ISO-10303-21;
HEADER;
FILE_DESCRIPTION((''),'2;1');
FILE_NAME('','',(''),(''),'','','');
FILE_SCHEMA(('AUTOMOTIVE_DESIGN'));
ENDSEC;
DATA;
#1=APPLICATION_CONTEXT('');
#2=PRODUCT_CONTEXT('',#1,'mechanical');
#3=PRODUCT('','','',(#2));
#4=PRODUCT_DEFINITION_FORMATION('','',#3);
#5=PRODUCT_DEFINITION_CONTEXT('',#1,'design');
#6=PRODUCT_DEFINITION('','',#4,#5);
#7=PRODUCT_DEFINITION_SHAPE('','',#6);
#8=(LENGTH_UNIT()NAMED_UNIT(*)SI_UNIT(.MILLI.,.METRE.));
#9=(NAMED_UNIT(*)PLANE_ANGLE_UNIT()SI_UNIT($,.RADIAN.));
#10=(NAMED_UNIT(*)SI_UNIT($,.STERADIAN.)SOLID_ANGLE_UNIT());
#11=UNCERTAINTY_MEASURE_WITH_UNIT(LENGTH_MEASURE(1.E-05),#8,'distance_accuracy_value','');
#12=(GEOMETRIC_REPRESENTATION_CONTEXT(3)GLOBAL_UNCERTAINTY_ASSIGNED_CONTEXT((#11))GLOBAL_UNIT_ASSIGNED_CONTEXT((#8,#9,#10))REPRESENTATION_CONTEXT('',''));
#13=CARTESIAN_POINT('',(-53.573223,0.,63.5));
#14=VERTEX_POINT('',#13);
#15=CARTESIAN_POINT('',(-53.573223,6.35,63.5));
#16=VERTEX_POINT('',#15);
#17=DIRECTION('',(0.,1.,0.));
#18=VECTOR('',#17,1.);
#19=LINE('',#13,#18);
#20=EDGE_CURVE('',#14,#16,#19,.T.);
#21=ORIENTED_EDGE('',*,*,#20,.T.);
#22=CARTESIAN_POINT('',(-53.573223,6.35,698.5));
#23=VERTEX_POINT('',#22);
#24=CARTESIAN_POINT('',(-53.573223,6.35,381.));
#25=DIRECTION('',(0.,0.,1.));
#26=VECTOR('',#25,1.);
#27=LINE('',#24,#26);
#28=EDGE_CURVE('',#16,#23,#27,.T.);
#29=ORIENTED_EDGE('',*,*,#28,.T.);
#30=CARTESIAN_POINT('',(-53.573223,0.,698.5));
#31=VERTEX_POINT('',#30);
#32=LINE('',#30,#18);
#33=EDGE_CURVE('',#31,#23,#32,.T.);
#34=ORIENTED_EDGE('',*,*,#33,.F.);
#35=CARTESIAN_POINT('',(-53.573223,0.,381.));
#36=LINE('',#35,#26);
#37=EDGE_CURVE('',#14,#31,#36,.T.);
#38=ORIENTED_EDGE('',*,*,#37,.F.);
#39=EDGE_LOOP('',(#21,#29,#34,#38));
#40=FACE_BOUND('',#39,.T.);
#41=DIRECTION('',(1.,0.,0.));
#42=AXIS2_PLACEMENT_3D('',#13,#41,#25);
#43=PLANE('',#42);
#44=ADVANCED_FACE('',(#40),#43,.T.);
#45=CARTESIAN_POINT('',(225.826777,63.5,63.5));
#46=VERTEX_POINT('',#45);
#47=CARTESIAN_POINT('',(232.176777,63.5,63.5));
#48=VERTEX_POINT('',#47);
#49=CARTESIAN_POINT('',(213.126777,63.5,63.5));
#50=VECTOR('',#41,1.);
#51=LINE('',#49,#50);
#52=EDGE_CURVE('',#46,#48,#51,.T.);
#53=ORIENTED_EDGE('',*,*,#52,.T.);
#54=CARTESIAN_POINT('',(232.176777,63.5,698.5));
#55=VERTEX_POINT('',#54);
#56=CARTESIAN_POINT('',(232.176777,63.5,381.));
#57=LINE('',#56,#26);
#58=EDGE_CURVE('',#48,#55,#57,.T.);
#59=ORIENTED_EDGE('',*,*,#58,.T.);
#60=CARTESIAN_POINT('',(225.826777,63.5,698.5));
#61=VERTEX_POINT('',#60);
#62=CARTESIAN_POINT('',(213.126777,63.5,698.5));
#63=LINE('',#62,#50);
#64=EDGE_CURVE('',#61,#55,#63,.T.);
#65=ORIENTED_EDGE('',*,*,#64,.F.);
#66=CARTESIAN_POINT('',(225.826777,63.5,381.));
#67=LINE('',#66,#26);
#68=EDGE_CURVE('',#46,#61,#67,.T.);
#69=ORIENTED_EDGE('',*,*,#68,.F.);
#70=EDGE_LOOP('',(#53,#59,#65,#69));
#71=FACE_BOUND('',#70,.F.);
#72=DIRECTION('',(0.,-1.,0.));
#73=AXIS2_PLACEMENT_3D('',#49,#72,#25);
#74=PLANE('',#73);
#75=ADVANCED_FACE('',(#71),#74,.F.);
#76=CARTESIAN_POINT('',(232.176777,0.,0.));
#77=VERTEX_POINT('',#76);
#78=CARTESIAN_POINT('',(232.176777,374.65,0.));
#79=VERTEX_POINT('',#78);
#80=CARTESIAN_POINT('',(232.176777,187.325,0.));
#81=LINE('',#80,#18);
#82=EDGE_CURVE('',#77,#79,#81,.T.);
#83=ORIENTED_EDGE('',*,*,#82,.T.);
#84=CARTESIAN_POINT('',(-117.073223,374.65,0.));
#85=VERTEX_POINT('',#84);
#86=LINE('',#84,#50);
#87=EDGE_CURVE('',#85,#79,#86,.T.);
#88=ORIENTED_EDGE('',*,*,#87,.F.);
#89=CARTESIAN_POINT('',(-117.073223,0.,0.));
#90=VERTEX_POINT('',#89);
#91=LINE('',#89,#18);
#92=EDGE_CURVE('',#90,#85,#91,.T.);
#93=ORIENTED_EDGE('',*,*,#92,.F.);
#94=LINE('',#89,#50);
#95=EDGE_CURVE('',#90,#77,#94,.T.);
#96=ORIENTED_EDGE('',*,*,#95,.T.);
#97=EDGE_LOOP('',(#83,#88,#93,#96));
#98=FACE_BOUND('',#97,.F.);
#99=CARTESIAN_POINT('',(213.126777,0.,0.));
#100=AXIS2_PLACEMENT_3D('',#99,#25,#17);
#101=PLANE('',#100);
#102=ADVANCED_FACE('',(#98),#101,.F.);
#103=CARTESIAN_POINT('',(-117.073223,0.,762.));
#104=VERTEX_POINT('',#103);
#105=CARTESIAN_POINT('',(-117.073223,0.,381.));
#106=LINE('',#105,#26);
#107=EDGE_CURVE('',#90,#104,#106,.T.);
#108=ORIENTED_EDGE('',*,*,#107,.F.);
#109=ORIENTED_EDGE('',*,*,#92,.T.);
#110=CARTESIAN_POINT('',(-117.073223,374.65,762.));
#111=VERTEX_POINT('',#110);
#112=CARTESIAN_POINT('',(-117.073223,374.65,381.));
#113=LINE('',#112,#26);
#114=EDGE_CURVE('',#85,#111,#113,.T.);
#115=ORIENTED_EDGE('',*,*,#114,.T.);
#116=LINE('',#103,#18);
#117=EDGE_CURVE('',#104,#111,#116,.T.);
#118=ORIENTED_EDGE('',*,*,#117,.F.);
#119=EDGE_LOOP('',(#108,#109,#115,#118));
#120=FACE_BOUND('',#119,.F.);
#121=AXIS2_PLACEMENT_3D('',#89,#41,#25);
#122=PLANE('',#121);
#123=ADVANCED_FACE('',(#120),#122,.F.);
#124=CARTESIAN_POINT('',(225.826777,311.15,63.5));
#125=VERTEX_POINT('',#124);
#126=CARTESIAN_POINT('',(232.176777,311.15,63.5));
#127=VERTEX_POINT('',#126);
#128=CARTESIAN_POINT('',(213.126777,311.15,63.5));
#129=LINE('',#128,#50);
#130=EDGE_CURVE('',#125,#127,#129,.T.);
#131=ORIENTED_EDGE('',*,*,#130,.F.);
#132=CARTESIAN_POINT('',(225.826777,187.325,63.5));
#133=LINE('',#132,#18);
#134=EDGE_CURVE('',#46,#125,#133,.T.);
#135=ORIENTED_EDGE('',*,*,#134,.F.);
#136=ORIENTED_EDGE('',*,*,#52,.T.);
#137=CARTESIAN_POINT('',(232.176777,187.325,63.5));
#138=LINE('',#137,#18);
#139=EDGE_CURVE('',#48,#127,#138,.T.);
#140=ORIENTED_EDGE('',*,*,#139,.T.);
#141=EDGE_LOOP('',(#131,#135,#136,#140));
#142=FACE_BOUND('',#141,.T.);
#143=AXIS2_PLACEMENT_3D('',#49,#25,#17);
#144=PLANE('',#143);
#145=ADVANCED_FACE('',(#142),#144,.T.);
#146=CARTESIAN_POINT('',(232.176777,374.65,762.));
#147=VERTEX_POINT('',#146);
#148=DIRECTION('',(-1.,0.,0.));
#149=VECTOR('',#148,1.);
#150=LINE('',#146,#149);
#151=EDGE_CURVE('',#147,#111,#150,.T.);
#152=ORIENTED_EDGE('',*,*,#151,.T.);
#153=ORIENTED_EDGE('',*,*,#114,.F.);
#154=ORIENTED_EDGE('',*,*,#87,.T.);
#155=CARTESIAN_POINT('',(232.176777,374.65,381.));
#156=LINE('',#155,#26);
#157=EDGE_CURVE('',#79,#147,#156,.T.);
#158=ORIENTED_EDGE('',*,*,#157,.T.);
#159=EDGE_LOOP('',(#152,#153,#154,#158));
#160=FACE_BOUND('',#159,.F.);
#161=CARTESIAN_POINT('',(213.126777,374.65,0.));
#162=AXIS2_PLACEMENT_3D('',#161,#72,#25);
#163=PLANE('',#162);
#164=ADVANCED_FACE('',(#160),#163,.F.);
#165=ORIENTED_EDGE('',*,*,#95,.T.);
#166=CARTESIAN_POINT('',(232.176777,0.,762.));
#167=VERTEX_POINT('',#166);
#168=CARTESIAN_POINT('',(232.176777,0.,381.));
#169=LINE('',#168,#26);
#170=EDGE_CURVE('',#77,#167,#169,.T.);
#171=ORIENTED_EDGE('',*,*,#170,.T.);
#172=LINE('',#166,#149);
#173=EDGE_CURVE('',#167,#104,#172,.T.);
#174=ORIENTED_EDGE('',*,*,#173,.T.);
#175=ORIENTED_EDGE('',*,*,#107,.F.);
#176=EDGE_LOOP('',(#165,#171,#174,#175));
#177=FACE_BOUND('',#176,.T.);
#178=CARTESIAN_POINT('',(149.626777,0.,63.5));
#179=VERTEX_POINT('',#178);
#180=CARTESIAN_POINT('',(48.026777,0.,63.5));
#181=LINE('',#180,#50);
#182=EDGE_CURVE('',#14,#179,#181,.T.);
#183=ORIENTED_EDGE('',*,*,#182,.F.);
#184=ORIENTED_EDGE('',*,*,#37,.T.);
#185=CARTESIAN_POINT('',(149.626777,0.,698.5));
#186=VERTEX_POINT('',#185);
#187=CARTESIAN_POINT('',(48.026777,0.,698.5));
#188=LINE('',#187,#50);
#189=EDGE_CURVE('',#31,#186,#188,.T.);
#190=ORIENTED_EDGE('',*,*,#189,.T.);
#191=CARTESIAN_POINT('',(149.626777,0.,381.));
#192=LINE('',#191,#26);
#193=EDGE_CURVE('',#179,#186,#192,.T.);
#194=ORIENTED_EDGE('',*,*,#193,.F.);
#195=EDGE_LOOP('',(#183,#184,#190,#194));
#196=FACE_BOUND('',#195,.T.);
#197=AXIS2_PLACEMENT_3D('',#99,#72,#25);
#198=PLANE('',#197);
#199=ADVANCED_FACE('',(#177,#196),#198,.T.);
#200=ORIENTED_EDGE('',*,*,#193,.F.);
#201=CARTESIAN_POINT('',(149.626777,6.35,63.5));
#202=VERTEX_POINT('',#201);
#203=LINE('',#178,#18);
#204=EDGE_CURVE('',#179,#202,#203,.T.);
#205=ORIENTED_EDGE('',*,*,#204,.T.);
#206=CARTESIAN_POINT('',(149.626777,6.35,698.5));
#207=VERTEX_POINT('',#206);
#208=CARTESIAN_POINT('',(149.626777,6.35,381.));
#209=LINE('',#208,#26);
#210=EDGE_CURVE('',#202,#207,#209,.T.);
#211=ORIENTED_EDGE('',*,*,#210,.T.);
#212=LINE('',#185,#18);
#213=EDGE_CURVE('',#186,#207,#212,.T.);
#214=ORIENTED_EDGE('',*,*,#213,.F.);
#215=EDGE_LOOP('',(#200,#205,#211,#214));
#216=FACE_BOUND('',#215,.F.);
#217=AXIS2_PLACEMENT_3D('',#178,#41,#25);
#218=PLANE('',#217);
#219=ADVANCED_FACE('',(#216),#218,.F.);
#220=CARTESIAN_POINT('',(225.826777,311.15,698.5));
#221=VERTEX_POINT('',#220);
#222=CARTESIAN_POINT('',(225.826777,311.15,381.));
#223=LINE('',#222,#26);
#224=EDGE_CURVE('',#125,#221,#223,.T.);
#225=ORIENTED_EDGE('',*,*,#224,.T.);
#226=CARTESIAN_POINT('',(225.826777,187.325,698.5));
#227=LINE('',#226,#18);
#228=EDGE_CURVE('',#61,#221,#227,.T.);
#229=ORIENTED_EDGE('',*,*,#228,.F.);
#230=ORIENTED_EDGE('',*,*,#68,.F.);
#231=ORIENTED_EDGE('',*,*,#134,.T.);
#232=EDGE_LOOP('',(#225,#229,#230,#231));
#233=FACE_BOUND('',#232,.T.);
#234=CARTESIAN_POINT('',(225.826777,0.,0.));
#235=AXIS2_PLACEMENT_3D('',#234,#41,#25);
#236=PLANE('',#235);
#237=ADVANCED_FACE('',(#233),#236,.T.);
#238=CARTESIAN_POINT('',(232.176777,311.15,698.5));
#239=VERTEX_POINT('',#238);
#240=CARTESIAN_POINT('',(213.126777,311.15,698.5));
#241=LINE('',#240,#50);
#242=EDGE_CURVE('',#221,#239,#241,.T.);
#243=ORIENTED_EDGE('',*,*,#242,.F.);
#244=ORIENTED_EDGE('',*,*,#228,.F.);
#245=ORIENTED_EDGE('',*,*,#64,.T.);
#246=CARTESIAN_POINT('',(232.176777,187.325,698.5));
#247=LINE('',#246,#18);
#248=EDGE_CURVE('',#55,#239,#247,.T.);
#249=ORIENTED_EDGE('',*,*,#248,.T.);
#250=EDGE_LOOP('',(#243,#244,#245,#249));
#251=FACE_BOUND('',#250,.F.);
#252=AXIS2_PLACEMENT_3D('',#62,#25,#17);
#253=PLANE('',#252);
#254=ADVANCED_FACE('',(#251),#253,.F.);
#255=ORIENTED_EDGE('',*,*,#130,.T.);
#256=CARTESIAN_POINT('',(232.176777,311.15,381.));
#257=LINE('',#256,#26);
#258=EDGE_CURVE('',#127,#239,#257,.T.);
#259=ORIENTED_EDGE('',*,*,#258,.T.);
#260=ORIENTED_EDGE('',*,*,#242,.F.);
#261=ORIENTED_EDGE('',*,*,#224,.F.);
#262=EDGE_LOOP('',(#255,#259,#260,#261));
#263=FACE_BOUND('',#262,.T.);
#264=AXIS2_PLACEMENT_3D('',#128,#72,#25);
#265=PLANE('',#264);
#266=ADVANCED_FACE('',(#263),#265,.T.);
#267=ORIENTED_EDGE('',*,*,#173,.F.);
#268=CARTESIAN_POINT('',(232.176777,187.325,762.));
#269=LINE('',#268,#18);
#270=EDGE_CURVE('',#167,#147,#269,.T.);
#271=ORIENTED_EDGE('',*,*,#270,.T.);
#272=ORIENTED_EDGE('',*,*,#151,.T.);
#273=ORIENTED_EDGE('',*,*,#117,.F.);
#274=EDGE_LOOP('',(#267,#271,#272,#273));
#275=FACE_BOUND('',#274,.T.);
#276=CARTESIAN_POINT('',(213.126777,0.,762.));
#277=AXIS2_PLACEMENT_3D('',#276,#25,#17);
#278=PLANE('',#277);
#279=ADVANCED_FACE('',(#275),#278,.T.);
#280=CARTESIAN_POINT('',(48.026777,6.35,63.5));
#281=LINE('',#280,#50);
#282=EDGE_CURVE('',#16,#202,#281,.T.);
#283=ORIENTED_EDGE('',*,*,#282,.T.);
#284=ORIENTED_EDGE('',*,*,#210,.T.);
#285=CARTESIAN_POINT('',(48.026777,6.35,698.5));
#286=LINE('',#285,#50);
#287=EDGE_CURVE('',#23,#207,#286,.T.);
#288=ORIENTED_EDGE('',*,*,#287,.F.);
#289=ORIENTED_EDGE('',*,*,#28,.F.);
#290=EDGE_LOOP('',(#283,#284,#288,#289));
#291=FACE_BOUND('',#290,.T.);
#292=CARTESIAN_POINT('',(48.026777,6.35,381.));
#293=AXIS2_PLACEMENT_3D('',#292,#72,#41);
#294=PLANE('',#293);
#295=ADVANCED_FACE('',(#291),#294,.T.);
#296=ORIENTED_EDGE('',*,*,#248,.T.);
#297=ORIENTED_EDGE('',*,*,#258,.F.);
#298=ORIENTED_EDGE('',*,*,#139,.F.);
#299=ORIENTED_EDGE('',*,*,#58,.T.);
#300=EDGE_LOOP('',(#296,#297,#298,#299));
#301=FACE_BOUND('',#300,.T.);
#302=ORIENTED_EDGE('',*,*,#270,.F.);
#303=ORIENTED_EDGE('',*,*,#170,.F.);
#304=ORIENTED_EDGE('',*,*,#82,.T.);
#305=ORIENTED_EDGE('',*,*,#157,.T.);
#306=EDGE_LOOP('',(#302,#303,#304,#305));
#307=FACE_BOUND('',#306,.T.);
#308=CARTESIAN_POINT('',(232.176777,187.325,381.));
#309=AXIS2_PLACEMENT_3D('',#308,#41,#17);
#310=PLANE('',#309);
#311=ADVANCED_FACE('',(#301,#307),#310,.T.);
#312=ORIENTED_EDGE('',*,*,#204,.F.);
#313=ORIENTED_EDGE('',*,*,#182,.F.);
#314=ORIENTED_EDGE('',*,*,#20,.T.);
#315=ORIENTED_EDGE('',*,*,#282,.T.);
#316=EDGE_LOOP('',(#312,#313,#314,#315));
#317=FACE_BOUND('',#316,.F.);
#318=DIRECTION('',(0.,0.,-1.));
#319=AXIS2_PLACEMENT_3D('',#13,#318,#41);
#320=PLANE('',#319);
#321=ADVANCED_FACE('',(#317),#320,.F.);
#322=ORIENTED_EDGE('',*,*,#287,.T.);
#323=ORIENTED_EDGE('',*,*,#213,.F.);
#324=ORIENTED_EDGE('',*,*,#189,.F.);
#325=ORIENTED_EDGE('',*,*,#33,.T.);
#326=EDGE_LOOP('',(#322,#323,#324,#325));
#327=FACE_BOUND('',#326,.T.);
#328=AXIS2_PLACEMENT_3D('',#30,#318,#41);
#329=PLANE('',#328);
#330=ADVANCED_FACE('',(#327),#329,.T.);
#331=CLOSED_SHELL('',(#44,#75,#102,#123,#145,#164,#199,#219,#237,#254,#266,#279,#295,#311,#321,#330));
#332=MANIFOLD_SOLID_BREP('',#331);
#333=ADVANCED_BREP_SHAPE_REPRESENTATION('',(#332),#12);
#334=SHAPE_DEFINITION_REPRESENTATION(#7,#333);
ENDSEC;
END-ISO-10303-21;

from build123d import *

# Parameters (mm, degrees)
F0_W     = 330.2
F0_H     = 762
F0_W_2   = 203.2
F0_H_2   = 635
F1_DEPTH = 374.65
F2_DEPTH = 6.35
F3_W     = 374.65
F3_H     = 762
F3_W_2   = 247.65
F3_H_2   = 635
F4_DEPTH = 19.05
F5_DEPTH = 12.7


# Not quite as in the source:
# - a feature names something its author has since deleted; it is built from what else it names


with BuildPart() as f1:
    # F0 (on Front) → F1 (new body)
    with BuildSketch(Plane.XZ):
        with Locations((48.0267770052, 381)):
            Rectangle(F0_W, F0_H)
        with Locations((48.0267770052, 381)):
            Rectangle(F0_W_2, F0_H_2, mode=Mode.SUBTRACT)
        with Locations((48.0267770052, 381)):
            Rectangle(F0_W_2, F0_H_2)
    extrude(amount=-F1_DEPTH)

    # F0 (on Front) → F2 (cut)
    with BuildSketch(Plane.XZ):
        with Locations((48.0267770052, 381)):
            Rectangle(F0_W_2, F0_H_2)
    extrude(amount=-F2_DEPTH, mode=Mode.SUBTRACT)

    # F3 (on face) → F4 (join)
    with BuildSketch(Plane.YZ.offset(213.1267770052)):
        with Locations((187.325, 381)):
            Rectangle(F3_W, F3_H)
        with Locations((187.325, 381)):
            Rectangle(F3_W_2, F3_H_2, mode=Mode.SUBTRACT)
    extrude(amount=F4_DEPTH)

    # F5 (add): a face of the model
    f5_faces = [f1.faces().sort_by_distance(p)[0] for p in [
        (213.1267770052, 187.325, 381),
    ]]
    extrude(f5_faces, amount=F5_DEPTH)


solid = f1.part
